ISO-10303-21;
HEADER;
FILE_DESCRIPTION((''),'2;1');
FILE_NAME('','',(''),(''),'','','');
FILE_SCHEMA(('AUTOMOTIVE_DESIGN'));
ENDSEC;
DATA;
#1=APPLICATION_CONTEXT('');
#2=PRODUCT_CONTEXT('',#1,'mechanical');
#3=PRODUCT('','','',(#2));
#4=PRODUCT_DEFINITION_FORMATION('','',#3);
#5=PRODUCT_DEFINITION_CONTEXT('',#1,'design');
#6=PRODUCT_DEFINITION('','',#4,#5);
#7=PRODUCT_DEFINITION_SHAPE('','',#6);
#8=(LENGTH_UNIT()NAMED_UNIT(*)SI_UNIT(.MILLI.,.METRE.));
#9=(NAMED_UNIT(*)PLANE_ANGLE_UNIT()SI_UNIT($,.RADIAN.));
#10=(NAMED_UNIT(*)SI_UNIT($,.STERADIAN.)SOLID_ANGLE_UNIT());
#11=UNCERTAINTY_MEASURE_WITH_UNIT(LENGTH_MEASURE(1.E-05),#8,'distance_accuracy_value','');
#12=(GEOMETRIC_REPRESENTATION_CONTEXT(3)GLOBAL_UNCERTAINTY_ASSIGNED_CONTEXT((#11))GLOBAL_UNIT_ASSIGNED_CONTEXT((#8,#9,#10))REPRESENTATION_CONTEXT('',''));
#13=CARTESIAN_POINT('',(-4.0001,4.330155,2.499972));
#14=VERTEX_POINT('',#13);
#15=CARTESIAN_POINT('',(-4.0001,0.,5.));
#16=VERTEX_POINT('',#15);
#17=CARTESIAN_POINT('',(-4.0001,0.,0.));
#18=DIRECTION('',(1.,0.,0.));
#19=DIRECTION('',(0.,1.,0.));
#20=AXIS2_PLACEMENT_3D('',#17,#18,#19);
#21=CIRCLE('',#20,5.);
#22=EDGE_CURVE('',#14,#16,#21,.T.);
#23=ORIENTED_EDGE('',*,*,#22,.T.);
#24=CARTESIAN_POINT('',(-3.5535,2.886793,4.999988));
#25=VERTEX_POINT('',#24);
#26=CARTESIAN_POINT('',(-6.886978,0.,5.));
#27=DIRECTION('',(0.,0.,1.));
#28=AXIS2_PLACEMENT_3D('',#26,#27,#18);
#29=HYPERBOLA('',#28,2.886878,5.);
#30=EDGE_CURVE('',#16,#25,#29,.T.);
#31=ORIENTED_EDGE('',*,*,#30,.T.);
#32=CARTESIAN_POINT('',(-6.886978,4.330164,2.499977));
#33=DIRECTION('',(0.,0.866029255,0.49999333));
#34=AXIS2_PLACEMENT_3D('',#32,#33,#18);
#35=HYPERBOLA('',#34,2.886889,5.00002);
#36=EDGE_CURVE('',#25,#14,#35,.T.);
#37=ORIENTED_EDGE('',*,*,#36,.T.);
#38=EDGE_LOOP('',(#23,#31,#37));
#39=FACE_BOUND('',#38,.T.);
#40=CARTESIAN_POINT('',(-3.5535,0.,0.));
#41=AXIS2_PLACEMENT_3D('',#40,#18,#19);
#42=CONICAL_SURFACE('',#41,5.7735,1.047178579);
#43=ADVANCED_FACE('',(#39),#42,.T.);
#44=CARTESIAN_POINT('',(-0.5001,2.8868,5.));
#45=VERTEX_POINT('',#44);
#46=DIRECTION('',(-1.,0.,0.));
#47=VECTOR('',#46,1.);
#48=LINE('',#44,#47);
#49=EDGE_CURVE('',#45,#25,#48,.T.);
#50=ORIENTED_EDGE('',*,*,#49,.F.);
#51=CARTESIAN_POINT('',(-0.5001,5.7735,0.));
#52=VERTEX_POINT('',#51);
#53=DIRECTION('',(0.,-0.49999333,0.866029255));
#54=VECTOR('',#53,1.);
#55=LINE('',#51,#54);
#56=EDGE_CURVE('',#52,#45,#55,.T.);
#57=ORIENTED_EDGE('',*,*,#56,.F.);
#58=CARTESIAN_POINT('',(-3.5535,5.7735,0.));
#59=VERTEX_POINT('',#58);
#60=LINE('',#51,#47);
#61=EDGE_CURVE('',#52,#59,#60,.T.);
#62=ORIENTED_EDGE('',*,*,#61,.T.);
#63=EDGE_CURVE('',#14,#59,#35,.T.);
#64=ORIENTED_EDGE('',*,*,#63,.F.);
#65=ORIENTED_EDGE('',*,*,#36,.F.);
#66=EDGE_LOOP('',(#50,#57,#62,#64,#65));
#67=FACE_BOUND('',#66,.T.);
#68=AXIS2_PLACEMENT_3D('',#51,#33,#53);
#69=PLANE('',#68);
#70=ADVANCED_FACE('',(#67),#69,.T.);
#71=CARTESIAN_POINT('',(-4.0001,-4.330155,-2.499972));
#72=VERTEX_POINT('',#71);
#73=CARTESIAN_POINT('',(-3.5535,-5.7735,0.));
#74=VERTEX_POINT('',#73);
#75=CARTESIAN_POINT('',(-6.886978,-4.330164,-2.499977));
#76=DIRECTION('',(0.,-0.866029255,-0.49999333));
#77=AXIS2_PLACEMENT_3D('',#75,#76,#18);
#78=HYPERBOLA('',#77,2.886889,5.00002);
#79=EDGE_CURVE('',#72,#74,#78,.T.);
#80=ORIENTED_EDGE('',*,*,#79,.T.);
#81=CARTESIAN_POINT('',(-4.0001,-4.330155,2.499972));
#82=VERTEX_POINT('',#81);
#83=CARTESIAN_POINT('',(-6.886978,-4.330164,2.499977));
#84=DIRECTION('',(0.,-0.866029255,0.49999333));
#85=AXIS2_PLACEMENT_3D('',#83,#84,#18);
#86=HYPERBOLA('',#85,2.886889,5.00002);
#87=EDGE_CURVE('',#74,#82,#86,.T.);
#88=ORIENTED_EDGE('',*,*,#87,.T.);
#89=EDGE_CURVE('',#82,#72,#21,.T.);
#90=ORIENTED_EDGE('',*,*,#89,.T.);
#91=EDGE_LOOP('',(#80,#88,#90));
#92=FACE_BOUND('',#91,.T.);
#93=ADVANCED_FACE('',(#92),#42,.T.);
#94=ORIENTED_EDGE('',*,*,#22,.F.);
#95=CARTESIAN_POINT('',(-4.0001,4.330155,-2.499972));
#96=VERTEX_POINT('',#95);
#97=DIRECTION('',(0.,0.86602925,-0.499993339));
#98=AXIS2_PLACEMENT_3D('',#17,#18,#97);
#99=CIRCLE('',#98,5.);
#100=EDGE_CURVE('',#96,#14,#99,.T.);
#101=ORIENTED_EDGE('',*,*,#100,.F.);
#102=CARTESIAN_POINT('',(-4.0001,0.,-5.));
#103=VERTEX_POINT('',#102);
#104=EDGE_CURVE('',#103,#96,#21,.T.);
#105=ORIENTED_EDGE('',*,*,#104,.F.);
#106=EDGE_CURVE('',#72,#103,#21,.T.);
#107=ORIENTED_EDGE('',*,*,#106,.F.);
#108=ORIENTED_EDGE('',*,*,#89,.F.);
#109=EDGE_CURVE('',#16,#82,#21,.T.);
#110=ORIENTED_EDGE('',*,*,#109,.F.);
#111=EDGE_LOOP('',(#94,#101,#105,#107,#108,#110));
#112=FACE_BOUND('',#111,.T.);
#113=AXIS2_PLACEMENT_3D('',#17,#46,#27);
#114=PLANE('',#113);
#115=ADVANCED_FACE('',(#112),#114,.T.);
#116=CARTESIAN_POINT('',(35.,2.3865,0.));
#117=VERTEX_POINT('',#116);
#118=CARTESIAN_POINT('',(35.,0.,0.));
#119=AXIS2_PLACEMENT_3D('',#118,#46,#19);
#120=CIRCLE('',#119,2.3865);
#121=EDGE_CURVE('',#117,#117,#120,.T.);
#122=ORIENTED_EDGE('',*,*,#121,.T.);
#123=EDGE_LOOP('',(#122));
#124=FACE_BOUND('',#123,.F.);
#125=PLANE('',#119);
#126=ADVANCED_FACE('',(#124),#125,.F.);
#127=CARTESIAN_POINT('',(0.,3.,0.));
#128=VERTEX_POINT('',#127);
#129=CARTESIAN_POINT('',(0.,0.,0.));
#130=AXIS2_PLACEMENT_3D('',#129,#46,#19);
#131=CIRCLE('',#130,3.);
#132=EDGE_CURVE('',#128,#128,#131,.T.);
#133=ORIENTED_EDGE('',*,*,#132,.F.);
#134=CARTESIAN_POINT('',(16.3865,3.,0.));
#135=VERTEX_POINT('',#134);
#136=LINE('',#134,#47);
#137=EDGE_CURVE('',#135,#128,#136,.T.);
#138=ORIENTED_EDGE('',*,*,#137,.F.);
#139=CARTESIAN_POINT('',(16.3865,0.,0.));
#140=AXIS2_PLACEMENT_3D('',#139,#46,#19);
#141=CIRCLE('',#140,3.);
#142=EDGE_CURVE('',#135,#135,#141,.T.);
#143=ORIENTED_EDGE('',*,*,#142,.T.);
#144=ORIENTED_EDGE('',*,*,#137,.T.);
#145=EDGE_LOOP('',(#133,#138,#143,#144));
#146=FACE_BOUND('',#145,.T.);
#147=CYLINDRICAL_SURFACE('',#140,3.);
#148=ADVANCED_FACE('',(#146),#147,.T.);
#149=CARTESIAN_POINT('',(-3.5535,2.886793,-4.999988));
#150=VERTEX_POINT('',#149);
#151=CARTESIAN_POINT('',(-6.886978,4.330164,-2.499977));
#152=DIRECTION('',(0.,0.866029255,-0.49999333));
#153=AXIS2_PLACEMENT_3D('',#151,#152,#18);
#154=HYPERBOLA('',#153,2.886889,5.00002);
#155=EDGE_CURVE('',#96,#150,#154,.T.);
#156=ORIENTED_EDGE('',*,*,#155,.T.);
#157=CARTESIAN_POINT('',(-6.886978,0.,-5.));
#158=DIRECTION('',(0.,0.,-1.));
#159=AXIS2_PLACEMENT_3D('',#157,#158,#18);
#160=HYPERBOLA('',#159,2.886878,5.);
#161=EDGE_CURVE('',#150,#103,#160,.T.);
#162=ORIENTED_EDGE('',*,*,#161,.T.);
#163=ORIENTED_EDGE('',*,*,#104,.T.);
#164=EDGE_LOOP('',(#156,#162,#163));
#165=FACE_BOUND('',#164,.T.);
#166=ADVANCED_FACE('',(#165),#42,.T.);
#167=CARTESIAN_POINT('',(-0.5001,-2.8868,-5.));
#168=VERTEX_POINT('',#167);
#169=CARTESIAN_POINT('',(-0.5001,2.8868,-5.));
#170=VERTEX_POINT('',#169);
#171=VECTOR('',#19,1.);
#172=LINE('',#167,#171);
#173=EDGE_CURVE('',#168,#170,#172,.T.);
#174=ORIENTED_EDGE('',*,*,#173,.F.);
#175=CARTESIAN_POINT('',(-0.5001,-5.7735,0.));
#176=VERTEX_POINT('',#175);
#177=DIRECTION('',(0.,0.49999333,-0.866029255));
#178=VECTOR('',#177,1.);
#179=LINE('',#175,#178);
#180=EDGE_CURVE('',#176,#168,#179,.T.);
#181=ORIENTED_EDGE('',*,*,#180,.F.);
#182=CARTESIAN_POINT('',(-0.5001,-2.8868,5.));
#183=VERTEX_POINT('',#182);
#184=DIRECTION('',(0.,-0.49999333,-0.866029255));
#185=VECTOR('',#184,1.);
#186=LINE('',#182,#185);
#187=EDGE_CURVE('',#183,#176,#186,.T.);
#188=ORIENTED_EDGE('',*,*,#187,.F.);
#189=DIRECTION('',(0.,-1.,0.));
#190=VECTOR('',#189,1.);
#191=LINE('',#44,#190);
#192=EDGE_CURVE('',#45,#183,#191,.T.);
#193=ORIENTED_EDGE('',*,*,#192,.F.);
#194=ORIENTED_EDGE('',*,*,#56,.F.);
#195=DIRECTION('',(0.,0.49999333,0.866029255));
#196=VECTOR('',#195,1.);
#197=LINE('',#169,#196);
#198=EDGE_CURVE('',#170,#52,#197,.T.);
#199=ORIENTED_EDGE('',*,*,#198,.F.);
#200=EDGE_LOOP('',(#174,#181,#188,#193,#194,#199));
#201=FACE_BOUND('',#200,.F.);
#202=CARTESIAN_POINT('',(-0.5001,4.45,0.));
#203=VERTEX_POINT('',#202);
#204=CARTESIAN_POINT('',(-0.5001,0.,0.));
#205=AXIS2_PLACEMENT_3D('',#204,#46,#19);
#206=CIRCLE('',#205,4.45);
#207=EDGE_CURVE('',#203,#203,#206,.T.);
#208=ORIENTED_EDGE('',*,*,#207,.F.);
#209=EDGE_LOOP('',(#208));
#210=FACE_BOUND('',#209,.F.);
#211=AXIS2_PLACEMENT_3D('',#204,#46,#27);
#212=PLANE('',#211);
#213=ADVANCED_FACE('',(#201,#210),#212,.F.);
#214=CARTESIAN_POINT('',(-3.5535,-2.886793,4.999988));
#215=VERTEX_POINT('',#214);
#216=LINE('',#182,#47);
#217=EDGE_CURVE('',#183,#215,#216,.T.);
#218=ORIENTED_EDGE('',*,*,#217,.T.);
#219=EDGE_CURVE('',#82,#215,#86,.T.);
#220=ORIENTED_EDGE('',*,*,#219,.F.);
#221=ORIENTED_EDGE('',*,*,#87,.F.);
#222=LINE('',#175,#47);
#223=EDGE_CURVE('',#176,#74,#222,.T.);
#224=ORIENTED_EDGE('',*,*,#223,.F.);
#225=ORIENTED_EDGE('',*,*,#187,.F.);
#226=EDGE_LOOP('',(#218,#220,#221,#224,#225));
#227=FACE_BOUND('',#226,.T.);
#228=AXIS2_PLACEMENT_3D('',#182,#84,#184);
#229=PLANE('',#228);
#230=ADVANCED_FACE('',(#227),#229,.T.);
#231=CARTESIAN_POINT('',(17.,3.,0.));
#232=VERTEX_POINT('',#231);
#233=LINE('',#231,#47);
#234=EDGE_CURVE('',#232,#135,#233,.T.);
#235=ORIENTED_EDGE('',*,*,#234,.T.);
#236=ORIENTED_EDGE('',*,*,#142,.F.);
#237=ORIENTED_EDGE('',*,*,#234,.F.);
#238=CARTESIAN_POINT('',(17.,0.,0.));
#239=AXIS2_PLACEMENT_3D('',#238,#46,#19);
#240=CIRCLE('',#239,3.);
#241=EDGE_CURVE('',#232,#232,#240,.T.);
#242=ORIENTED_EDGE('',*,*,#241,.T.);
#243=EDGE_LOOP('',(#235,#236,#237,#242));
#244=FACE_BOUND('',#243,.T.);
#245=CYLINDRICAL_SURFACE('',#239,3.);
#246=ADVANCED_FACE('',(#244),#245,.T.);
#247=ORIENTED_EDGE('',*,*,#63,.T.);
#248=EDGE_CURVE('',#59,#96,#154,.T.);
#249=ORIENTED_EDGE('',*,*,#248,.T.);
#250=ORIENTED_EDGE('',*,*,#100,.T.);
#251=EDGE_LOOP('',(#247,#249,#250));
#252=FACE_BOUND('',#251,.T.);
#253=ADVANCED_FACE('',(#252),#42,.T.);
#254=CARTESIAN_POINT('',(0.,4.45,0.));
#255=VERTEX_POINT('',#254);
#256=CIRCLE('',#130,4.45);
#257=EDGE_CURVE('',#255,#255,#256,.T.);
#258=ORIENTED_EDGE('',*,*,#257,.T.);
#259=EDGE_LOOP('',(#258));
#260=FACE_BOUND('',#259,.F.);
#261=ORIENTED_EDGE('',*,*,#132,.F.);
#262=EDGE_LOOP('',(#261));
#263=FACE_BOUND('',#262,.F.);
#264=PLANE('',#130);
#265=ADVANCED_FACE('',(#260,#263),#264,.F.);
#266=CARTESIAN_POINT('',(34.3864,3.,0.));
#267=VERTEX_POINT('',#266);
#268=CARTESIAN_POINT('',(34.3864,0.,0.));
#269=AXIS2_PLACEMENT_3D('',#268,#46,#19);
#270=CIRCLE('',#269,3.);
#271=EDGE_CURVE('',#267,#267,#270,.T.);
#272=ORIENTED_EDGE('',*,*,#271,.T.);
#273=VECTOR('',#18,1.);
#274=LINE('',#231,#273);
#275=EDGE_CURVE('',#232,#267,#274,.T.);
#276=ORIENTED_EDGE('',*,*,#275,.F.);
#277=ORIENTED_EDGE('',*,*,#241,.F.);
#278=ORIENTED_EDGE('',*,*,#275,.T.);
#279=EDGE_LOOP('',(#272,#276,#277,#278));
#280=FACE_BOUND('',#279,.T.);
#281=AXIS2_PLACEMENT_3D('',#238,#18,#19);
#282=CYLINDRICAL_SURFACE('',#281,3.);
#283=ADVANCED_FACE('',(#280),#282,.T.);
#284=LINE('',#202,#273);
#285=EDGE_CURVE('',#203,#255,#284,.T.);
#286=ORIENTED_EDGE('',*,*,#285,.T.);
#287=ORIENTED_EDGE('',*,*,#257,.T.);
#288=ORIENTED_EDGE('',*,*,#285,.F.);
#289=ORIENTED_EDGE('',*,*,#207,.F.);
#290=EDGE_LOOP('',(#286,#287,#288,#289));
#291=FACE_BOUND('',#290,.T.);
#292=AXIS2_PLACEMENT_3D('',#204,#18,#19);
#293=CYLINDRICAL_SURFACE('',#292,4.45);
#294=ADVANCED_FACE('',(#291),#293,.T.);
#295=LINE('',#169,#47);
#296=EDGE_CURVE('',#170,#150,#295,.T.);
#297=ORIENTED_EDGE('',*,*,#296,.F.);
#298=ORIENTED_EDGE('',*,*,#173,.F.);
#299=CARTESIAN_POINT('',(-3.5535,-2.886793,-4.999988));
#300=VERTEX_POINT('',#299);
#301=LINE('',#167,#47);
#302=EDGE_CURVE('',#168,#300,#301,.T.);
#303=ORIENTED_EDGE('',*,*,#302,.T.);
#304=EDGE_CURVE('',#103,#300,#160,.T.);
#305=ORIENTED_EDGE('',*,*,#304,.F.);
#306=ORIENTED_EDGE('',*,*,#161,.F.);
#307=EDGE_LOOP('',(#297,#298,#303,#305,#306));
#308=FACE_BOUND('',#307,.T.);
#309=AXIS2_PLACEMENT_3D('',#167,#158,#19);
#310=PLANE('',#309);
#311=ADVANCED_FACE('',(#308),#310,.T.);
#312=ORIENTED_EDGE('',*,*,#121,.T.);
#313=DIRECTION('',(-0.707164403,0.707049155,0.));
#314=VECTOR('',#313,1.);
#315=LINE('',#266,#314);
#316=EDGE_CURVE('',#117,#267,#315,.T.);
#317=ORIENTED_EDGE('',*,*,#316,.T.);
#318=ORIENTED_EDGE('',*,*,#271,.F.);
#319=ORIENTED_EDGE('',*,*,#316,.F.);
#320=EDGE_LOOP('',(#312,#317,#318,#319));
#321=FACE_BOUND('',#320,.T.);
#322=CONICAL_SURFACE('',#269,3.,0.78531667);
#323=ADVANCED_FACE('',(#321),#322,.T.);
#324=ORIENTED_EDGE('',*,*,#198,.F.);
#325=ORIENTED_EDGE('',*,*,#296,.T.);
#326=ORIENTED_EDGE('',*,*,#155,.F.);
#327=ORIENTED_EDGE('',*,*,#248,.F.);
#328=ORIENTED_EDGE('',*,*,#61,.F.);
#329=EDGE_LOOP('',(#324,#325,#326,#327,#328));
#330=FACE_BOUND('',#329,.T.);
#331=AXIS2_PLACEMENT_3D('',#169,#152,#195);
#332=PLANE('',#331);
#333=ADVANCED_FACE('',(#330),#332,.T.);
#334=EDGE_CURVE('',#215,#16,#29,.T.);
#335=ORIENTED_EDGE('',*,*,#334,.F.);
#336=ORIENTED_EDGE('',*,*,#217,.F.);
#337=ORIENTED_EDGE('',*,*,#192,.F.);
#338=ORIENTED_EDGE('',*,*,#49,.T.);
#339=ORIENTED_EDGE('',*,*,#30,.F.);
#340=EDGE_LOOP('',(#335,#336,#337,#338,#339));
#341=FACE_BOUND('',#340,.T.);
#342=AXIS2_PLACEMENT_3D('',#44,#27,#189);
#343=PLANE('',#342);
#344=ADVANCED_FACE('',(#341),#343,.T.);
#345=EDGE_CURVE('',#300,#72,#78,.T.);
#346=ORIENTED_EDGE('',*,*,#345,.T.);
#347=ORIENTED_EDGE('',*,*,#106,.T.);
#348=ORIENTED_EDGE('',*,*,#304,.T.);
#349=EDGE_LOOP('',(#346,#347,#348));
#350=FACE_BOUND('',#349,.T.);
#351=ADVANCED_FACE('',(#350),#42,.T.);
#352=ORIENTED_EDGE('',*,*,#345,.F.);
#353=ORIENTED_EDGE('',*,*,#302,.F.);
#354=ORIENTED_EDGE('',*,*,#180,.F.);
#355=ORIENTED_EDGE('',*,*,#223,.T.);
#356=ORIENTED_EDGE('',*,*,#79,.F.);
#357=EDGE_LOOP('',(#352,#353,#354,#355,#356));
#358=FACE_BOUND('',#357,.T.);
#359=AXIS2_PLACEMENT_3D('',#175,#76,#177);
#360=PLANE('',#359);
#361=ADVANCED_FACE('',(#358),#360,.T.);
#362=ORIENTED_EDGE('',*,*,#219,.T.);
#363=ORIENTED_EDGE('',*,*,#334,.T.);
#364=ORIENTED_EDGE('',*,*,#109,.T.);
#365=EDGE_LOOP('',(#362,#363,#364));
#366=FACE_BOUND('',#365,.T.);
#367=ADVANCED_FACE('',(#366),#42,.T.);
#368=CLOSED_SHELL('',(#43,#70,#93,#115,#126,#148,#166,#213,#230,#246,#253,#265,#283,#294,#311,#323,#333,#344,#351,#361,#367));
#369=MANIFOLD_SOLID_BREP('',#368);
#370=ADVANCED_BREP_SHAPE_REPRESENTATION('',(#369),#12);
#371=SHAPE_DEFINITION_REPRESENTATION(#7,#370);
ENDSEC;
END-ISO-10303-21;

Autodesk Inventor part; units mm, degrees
ref_plane "YZ Plane" through (0, 0, 0) normal (1, 0, 0) x (0, 1, 0)
ref_plane "XZ Plane" through (0, 0, 0) normal (0, 1, 0) x (-1, 0, 0)
sketch "Sketch1" plane through (0, 0, 0) normal (0, 0, 1) x (1, 0, 0)
  line L0 (0, 4.45) -> (0, 3)
  line L1 (17, 3) -> (35, 3)
  line L2 (35, 3) -> (35, 0)
  line L3 (35, 0) -> (-0.5001, 0)
  line L4 (-7.6001, 0) -> (42.1, 0) projected
  line L5 (-0.5001, 0) -> (-0.5001, 4.45)
  line L6 (-0.5001, 4.45) -> (0, 4.45)
  line L7 (17, 3) -> (16.3865, 3)
  line L8 (16.3865, 3) -> (0, 3)
  line L9 (0, -0.89) -> (0, 5.34) projected
  dimension "d0" = 35
  dimension "d1" = 18
  dimension "d2" = 6
  dimension "d9" = 0.5001
  dimension "d10" = 8.9
  dimension "d13" = 0.6136
  dimension "d14" = 6
revolve "Body" add sketch "Sketch1" angle 360 about axis through (35, 0, 0) along (-1, 0, 0)
sketch "Sketch2" plane through (-0.5001, 0, 0) normal (-1, 0, 0) x (0, 0, 1)
  line L0 (0, 5.7735) -> (5, 2.8868)
  line L1 (5, 2.8868) -> (5, -2.8868)
  line L2 (5, -2.8868) -> (0, -5.7735)
  line L3 (0, -5.7735) -> (-5, -2.8868)
  line L4 (-5, -2.8868) -> (-5, 2.8868)
  line L5 (-5, 2.8868) -> (0, 5.7735)
  point P0 (0, 0)
  point P1 (0, 0)
  dimension "d11" = 10
extrude "Head" add sketch "Sketch2" along normal blind 3.5
sketch "Sketch4" plane through (0, 0, 0) normal (0, 0, 1) x (1, 0, 0)
  line L0 (-4.0001, 5) -> (-4.0001, 5.7735)
  line L1 (-4.0001, 5.7735) -> (-3.5535, 5.7735)
  line L2 (-3.5535, 5.7735) -> (-4.0001, 5)
  line L3 (-4.7001, 0) -> (0.1999, 0) projected
  line L4 (-0.5001, 5.7735) -> (-4.0001, 5.7735) projected
  line L5 (-4.0001, 2.8868) -> (-4.0001, 5.7735) projected
  dimension "d5" = 30
  dimension "d19" = 10
revolve "Chamfer1" cut sketch "Sketch4" angle 360 about axis through (-10, 0, 0) along (1, 0, 0)
thread "Thread" size "M6x1" class "6g" standard "ISO Metric profile" length 18
chamfer "Chamfer2" distance 0.6135 distance2 0.6136 1 edges at (35, -3, 0) measured on face at (35, 0.7485, -0.6631)
ref_plane "Work Plane1" through (1.525, 0, 0) normal (0, 0, 1) x (1, 0, 0)
equation "\"d11\" = SW"
equation "\"d3\" = KOH - SD"
equation "\"d15\" = GEL"
equation "\"d6\" = -0.5 * SPD + 0.5 * GD"
equation "\"d0\" = NLG"
equation "\"d1\" = GEL"
equation "\"d2\" = GD"
equation "\"d10\" = SD2"
equation "\"d14\" = BDM"
equation "\"d5\" = ANG1"
equation "\"d19\" = SW0"
equation "\"NLG\" = 35"
equation "\"GD\" = NND"
equation "\"BDM\" = NND"
equation "\"KOH\" = 4"
equation "\"GEL\" = 18"
equation "\"SW\" = 10"
equation "\"SW0\" = SW"
equation "\"SPD\" = NND - 1.2269 * PTC"
equation "\"SD2\" = 8.9"
equation "\"SD\" = 0.5"
equation "\"ANG1\" = 30deg"
equation "\"GAL\" = 0.61345 * PTC"
equation "\"GUL\" = 0.61345 * PTC"
equation "\"RR\" = 0.25"
equation "\"GD1\" = THREADDIA - 1.2269 * PTC"
equation "\"THREADDIA\" = 6"
equation "\"TOA\" = 30deg"
equation "\"PTC\" = 1"
equation "\"NND\" = 6"
equation "\"E0\" = 1.155 * SW"
properties part number "DIN 931-1 - M6 x 35" material "Steel, Mild"
